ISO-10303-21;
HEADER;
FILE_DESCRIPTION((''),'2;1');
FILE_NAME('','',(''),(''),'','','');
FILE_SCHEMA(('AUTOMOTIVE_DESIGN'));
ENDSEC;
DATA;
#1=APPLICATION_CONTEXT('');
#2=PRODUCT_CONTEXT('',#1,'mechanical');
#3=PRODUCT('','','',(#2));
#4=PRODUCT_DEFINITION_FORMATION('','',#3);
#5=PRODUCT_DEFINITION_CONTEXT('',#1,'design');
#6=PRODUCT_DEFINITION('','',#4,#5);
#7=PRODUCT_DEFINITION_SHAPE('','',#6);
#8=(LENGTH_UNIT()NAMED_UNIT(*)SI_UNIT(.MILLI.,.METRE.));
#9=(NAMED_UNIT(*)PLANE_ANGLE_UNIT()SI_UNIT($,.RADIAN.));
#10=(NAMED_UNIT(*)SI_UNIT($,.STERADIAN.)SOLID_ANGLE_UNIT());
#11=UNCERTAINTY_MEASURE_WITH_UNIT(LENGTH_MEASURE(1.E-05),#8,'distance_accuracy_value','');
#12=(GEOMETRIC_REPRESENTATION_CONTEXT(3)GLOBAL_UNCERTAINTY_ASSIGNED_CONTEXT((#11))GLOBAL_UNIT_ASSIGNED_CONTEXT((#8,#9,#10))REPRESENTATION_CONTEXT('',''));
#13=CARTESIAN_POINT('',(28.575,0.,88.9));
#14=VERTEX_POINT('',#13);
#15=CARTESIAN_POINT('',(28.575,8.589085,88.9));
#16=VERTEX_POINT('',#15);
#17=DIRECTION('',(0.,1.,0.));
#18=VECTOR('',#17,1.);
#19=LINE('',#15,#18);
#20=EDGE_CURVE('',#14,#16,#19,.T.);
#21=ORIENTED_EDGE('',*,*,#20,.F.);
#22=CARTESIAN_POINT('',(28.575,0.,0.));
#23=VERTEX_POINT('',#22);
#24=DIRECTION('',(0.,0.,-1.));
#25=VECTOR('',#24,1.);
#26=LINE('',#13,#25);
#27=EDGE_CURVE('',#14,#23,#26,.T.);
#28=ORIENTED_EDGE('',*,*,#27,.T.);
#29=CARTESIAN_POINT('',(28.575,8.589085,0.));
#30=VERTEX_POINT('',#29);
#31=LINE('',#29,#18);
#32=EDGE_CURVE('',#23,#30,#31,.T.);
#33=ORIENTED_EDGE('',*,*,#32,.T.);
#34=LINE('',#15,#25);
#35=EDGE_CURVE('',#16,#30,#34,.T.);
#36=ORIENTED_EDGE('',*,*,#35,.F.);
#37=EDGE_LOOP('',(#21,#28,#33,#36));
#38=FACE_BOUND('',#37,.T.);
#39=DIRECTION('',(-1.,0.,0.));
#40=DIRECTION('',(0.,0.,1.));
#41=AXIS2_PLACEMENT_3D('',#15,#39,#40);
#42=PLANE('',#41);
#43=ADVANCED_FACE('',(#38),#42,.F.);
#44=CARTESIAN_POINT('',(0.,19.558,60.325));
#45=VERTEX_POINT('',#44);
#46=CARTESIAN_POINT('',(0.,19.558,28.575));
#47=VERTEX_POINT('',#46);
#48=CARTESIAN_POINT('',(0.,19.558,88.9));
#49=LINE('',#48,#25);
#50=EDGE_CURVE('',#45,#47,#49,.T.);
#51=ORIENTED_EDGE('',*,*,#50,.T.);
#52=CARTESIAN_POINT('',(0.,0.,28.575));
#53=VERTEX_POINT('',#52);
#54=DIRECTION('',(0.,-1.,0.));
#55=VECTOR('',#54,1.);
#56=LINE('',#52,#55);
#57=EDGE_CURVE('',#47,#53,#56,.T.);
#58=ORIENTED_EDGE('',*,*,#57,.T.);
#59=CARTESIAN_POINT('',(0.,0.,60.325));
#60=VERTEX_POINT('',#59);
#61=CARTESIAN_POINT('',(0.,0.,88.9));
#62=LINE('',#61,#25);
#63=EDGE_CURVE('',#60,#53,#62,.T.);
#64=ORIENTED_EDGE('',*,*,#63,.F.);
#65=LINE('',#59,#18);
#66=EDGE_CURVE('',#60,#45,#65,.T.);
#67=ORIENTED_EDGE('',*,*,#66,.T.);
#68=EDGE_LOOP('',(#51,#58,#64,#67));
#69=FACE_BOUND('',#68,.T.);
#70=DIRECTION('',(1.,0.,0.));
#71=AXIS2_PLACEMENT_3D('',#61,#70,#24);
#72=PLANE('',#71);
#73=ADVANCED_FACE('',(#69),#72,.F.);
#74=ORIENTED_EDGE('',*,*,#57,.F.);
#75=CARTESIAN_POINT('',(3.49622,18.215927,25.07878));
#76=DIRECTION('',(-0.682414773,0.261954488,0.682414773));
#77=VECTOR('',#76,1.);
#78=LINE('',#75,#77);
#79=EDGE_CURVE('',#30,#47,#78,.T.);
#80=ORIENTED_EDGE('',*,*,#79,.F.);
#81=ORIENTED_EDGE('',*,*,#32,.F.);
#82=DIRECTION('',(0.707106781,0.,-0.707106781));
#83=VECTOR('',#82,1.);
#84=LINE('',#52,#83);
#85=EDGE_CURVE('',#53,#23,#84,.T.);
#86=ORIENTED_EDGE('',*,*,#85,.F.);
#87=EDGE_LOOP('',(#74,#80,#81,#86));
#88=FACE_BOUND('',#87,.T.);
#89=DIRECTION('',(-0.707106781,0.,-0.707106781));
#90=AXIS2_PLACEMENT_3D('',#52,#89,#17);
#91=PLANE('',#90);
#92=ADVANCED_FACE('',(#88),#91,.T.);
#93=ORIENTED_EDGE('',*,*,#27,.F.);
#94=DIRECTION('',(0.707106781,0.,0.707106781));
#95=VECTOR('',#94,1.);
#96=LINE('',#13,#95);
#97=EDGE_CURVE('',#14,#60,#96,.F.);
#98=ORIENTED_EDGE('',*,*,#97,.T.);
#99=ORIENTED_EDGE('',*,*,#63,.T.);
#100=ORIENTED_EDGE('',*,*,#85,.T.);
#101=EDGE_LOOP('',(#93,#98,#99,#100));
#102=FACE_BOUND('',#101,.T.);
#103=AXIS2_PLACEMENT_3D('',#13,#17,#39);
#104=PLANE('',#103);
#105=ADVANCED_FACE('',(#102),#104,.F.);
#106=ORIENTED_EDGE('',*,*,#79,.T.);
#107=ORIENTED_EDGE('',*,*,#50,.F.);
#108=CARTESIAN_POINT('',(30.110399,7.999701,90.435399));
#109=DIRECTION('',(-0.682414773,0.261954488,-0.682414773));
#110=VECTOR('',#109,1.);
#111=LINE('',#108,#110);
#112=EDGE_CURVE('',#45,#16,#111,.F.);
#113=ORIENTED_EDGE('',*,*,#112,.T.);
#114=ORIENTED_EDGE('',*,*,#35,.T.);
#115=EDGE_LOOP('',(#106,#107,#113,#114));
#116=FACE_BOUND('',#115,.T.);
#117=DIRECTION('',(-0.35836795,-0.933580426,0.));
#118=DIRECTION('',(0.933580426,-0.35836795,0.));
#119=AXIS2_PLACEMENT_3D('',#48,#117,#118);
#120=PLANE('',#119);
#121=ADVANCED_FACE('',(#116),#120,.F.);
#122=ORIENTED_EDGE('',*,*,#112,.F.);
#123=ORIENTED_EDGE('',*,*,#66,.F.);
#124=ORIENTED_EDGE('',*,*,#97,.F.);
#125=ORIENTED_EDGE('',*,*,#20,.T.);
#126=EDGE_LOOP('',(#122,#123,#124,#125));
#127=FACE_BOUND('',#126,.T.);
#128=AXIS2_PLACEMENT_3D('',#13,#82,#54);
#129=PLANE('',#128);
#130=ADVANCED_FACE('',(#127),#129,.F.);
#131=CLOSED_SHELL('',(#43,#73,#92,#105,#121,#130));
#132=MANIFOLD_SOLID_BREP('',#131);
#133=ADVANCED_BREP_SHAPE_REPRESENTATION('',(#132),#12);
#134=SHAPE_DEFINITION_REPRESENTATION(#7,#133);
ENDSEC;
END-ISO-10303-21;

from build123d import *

# Parameters (mm, degrees)
BOSS_EXTRUDE1_DEPTH = 88.9
CHAMFER1_SIZE       = 28.575


with BuildPart() as part:
    # Sketch1 → Boss-Extrude1 (new body)
    with BuildSketch(Plane.XY):
        Polygon((0, 0), (0, 19.558), (28.575, 8.589085199), (28.575, 0), align=None)
    extrude(amount=BOSS_EXTRUDE1_DEPTH)

    # Chamfer1
    chamfer1_edges = [part.edges().sort_by_distance(p)[0] for p in [
        (0, 9.779, 88.9),
        (0, 9.779, 0),
    ]]
    chamfer(chamfer1_edges, length=CHAMFER1_SIZE - 0.0001)  # a hair under: the kernel refuses the full size


solid = part.part
